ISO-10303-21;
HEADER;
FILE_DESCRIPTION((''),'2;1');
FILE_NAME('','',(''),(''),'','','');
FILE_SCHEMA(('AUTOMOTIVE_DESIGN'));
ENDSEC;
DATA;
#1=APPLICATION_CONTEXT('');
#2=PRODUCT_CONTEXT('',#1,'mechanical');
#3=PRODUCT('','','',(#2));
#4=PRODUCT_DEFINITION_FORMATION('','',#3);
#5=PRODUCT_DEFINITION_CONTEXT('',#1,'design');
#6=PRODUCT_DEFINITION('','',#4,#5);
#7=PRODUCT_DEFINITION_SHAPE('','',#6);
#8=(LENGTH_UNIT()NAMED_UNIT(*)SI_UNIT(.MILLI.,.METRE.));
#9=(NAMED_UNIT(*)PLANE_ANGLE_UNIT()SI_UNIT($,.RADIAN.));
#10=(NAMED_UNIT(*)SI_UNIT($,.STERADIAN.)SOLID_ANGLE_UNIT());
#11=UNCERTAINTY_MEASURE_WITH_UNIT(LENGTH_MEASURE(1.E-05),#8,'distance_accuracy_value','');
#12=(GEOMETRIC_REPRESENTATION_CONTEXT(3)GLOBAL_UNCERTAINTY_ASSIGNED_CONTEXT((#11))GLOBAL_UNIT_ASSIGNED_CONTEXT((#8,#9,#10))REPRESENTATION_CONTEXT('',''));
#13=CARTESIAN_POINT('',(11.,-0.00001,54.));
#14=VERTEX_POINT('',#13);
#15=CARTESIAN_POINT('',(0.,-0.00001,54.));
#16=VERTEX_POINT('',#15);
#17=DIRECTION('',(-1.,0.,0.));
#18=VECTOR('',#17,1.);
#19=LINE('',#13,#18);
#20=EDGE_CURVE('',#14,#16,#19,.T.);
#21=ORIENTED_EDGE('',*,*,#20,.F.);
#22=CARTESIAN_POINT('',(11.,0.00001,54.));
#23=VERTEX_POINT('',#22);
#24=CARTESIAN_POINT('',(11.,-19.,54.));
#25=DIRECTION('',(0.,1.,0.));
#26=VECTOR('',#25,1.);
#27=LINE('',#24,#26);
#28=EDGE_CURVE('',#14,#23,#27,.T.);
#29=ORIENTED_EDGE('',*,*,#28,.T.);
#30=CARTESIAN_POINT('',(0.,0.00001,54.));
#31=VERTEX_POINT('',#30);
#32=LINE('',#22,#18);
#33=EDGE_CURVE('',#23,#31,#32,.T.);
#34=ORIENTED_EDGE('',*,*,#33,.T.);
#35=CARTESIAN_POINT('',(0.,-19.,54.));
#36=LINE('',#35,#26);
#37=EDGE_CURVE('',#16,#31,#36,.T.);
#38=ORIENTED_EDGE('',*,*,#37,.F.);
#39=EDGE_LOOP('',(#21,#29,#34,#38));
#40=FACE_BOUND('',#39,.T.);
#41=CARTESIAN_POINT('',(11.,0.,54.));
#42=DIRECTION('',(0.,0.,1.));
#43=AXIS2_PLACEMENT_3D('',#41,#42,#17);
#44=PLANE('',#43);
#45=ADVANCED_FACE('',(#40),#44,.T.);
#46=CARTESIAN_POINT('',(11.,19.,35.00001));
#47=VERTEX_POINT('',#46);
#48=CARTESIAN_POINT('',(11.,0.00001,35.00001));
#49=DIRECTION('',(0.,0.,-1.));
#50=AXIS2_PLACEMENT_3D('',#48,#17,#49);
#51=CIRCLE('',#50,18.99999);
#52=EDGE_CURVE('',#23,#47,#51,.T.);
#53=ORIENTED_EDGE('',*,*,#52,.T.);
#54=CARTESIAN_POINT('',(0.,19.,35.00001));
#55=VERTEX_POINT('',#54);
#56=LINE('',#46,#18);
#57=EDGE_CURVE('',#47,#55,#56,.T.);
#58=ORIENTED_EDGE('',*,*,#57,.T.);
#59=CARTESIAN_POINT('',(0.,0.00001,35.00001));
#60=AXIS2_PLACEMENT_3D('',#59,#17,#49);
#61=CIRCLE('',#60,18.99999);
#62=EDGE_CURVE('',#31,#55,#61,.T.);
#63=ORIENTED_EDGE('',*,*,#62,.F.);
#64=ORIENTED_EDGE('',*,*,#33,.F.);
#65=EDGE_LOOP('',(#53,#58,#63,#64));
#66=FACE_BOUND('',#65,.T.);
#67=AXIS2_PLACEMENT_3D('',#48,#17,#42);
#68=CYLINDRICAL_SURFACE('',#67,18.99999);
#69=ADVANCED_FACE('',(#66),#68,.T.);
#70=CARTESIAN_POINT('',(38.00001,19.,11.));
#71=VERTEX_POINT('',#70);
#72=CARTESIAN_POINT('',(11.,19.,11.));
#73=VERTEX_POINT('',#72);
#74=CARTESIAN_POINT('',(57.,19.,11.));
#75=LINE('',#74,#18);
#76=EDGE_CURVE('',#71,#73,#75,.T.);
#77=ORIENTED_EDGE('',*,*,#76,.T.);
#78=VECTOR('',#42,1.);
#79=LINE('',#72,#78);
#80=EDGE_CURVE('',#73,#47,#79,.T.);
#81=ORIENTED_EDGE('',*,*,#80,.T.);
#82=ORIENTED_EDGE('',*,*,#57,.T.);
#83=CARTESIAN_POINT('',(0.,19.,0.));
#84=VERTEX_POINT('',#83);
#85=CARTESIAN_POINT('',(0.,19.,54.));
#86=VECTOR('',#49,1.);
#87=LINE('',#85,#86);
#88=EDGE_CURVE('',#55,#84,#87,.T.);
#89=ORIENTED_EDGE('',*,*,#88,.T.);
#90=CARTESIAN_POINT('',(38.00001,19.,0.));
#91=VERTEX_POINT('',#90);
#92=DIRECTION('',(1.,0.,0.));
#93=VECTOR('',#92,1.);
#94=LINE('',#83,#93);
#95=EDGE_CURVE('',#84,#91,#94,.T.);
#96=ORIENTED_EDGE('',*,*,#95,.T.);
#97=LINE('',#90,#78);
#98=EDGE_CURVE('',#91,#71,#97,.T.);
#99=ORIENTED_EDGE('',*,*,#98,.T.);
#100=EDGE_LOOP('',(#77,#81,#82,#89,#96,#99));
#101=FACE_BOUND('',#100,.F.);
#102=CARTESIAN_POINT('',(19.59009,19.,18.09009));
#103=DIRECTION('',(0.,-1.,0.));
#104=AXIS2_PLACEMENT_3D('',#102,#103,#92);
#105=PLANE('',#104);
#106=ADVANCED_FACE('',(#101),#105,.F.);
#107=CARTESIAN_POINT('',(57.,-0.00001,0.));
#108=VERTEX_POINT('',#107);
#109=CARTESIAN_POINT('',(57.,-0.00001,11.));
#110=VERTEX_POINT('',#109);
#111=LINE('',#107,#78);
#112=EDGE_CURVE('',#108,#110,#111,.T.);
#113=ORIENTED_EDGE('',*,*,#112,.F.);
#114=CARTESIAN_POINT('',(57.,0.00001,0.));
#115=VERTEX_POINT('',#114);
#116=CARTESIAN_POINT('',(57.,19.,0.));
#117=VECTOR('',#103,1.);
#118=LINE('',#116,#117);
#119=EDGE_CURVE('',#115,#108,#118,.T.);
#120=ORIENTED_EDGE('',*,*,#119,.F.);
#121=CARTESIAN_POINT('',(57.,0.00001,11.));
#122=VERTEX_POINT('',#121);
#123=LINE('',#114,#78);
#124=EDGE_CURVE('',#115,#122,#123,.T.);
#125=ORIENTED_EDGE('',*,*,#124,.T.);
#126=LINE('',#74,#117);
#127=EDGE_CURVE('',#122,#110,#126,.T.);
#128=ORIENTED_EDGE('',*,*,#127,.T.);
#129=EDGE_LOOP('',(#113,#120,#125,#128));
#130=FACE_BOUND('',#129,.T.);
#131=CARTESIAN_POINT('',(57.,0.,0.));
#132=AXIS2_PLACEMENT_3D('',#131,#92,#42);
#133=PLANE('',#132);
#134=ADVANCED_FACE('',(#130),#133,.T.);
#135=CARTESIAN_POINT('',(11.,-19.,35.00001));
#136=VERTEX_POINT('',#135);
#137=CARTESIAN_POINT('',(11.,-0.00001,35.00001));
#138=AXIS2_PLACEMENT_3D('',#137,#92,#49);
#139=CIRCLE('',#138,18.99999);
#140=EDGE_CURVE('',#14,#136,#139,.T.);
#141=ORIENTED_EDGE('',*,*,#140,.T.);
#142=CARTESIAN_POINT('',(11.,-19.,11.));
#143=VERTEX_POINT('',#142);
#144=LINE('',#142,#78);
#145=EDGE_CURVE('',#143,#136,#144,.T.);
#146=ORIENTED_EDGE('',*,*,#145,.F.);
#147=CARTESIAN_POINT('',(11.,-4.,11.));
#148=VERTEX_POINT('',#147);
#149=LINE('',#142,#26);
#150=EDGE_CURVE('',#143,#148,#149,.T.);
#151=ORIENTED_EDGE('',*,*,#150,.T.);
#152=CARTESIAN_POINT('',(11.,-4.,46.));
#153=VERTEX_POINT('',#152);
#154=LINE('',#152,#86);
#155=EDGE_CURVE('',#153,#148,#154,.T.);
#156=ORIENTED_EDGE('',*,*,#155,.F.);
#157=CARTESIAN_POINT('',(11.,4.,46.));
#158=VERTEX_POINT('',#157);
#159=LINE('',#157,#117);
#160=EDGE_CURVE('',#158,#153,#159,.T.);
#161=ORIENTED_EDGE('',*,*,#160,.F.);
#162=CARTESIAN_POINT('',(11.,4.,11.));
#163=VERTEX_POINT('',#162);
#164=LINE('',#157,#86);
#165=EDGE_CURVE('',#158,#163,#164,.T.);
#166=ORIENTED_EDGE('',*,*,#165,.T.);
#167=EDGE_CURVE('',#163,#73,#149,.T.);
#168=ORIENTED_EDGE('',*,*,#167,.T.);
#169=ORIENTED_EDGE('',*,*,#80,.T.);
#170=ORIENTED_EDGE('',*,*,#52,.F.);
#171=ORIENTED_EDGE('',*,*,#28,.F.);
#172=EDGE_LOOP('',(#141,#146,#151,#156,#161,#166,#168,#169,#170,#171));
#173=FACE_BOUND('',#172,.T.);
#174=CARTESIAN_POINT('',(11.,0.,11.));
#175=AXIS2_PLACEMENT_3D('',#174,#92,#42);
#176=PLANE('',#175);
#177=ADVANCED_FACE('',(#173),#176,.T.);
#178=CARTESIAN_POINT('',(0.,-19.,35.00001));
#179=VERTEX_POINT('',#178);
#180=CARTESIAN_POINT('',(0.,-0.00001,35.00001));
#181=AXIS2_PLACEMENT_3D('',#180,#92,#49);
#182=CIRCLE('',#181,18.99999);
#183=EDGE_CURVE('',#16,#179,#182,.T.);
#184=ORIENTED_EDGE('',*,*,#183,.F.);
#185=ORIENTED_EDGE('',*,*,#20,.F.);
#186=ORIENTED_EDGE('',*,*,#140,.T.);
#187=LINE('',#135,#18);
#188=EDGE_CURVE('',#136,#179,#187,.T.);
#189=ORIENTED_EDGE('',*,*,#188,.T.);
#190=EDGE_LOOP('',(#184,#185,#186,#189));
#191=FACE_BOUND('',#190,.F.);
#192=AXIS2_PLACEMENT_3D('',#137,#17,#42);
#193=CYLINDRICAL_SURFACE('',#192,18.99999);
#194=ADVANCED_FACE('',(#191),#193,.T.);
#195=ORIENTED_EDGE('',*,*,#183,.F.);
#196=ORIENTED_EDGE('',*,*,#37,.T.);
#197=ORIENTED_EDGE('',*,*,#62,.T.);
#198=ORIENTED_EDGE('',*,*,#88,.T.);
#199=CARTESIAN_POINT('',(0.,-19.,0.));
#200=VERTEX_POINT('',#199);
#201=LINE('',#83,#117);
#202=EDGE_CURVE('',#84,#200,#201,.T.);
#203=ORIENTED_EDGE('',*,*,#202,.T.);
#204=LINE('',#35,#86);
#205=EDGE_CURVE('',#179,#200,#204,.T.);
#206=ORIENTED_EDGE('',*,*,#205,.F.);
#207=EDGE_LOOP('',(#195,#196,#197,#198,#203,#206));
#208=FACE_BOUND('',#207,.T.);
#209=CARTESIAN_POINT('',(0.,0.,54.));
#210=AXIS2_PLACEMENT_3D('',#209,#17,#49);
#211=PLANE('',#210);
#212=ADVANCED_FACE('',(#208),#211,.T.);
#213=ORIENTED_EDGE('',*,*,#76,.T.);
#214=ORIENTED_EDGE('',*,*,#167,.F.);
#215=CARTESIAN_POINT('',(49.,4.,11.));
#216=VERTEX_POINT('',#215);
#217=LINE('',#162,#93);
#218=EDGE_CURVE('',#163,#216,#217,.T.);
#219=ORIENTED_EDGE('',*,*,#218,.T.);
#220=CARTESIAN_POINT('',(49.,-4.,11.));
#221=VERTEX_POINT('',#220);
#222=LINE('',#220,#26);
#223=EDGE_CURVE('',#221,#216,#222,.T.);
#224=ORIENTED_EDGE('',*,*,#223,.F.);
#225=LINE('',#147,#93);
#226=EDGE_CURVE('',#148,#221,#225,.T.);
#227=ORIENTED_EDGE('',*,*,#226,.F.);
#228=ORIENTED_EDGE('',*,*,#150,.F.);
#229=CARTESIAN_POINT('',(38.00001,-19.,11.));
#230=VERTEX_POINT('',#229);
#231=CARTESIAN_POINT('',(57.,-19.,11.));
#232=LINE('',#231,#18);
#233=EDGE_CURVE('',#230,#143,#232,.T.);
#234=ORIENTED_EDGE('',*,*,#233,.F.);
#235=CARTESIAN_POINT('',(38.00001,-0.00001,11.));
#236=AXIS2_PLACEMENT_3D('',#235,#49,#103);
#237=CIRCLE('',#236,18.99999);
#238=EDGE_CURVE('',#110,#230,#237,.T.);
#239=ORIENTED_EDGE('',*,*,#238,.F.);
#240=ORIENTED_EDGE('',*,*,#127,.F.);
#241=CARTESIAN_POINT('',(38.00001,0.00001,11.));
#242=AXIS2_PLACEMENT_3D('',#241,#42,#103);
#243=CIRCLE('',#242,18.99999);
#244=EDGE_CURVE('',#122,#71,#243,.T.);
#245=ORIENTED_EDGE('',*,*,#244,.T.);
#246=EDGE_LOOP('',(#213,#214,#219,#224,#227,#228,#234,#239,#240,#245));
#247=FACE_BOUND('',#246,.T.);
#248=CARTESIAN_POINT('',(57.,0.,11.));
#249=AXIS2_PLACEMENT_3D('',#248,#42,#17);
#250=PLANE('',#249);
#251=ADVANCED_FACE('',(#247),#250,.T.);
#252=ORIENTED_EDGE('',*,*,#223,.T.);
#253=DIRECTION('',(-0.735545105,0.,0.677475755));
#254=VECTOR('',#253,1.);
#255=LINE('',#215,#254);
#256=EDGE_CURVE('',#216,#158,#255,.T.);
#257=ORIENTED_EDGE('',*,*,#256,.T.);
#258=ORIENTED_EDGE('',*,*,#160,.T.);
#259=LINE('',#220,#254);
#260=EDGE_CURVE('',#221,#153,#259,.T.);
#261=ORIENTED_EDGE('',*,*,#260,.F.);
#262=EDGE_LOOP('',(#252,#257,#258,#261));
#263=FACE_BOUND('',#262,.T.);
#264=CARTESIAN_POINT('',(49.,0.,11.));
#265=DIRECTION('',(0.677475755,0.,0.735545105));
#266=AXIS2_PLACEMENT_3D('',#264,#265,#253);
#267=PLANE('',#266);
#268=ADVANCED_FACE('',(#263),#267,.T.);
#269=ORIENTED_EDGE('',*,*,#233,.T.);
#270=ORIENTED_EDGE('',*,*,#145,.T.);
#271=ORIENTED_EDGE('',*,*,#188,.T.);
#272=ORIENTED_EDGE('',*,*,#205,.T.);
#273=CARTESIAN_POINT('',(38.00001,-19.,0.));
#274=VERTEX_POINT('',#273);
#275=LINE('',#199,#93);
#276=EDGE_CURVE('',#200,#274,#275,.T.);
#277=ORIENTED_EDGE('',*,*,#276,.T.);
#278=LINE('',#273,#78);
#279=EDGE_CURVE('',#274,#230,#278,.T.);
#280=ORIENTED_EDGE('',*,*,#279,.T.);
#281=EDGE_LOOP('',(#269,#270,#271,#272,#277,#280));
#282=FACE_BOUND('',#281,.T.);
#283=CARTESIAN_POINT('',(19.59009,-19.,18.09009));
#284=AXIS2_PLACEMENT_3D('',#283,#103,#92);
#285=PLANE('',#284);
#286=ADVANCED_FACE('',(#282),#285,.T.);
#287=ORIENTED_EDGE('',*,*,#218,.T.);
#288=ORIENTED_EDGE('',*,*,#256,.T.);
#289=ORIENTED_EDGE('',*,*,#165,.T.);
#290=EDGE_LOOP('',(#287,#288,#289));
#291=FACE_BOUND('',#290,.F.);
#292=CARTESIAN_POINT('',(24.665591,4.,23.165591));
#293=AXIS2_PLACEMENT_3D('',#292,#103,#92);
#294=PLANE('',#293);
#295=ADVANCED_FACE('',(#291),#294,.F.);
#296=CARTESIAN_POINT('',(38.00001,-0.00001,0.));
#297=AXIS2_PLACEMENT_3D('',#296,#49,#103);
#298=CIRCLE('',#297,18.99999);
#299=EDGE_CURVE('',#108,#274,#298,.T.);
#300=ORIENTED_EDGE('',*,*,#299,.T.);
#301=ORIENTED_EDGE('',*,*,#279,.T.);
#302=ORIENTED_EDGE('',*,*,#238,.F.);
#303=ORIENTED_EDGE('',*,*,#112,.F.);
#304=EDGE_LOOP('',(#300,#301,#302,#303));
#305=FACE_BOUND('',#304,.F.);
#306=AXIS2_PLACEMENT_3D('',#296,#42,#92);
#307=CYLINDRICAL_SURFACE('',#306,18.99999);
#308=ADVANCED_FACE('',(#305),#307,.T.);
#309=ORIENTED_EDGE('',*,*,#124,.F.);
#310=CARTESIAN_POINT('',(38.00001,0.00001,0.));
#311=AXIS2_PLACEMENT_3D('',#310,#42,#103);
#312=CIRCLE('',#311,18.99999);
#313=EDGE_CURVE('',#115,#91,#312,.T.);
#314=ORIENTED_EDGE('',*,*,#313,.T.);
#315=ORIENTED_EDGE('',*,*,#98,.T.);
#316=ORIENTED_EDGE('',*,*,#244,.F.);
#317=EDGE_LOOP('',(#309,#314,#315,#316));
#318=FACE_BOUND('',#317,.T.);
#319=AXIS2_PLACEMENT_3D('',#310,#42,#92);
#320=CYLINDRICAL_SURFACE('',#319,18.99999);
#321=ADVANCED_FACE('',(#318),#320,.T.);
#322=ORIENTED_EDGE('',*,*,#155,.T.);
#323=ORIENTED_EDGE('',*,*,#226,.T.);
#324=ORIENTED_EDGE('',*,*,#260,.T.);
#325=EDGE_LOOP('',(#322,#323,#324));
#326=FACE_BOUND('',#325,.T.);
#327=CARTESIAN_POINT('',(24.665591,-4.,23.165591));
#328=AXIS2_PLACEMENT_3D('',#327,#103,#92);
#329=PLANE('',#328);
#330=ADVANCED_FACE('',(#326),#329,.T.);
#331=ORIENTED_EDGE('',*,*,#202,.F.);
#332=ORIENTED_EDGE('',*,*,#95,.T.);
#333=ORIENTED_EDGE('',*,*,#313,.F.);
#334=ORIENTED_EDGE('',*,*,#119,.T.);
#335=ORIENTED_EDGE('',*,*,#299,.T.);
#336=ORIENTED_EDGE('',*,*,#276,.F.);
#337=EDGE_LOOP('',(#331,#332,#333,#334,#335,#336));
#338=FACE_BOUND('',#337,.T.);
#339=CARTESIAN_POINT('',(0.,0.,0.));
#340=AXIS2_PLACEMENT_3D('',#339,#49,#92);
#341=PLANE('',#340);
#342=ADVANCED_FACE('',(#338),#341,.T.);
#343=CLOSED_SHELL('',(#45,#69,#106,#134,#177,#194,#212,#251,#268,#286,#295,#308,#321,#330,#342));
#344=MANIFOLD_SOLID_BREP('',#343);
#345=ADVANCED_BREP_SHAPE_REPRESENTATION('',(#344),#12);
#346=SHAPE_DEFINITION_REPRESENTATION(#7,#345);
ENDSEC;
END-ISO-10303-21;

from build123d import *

# Parameters (mm, degrees)
F1_DEPTH = 19
F2_R     = 18.99999
F4_DEPTH = 4


# Not quite as in the source:
# - a fillet or chamfer is up to 0.001 mm smaller than in the source, because OpenCascade refuses the exact size


with BuildPart() as f1:
    # F0 (on Front) → F1 (new body, symmetric)
    with BuildSketch(Plane.XZ):
        Polygon((0, 54), (0, 0), (57, 0), (57, 11), (11, 11), (11, 54), align=None)
    extrude(amount=F1_DEPTH, both=True)

    # F2 (radius 19 in the source; OpenCascade refuses exactly that, so slightly less here)
    f2_edges = [f1.edges().sort_by_distance(p)[0] for p in [
        (5.5, -19, 54),
        (5.5, 19, 54),
        (57, -19, 5.5),
        (57, 19, 5.5),
    ]]
    fillet(f2_edges, radius=F2_R)

    # F3 (on Front) → F4 (join, symmetric)
    with BuildSketch(Plane.XZ):
        Polygon((49, 11), (11, 46), (11, 35), (11, 11), (38, 11), align=None)
    extrude(amount=F4_DEPTH, both=True)


solid = f1.part
